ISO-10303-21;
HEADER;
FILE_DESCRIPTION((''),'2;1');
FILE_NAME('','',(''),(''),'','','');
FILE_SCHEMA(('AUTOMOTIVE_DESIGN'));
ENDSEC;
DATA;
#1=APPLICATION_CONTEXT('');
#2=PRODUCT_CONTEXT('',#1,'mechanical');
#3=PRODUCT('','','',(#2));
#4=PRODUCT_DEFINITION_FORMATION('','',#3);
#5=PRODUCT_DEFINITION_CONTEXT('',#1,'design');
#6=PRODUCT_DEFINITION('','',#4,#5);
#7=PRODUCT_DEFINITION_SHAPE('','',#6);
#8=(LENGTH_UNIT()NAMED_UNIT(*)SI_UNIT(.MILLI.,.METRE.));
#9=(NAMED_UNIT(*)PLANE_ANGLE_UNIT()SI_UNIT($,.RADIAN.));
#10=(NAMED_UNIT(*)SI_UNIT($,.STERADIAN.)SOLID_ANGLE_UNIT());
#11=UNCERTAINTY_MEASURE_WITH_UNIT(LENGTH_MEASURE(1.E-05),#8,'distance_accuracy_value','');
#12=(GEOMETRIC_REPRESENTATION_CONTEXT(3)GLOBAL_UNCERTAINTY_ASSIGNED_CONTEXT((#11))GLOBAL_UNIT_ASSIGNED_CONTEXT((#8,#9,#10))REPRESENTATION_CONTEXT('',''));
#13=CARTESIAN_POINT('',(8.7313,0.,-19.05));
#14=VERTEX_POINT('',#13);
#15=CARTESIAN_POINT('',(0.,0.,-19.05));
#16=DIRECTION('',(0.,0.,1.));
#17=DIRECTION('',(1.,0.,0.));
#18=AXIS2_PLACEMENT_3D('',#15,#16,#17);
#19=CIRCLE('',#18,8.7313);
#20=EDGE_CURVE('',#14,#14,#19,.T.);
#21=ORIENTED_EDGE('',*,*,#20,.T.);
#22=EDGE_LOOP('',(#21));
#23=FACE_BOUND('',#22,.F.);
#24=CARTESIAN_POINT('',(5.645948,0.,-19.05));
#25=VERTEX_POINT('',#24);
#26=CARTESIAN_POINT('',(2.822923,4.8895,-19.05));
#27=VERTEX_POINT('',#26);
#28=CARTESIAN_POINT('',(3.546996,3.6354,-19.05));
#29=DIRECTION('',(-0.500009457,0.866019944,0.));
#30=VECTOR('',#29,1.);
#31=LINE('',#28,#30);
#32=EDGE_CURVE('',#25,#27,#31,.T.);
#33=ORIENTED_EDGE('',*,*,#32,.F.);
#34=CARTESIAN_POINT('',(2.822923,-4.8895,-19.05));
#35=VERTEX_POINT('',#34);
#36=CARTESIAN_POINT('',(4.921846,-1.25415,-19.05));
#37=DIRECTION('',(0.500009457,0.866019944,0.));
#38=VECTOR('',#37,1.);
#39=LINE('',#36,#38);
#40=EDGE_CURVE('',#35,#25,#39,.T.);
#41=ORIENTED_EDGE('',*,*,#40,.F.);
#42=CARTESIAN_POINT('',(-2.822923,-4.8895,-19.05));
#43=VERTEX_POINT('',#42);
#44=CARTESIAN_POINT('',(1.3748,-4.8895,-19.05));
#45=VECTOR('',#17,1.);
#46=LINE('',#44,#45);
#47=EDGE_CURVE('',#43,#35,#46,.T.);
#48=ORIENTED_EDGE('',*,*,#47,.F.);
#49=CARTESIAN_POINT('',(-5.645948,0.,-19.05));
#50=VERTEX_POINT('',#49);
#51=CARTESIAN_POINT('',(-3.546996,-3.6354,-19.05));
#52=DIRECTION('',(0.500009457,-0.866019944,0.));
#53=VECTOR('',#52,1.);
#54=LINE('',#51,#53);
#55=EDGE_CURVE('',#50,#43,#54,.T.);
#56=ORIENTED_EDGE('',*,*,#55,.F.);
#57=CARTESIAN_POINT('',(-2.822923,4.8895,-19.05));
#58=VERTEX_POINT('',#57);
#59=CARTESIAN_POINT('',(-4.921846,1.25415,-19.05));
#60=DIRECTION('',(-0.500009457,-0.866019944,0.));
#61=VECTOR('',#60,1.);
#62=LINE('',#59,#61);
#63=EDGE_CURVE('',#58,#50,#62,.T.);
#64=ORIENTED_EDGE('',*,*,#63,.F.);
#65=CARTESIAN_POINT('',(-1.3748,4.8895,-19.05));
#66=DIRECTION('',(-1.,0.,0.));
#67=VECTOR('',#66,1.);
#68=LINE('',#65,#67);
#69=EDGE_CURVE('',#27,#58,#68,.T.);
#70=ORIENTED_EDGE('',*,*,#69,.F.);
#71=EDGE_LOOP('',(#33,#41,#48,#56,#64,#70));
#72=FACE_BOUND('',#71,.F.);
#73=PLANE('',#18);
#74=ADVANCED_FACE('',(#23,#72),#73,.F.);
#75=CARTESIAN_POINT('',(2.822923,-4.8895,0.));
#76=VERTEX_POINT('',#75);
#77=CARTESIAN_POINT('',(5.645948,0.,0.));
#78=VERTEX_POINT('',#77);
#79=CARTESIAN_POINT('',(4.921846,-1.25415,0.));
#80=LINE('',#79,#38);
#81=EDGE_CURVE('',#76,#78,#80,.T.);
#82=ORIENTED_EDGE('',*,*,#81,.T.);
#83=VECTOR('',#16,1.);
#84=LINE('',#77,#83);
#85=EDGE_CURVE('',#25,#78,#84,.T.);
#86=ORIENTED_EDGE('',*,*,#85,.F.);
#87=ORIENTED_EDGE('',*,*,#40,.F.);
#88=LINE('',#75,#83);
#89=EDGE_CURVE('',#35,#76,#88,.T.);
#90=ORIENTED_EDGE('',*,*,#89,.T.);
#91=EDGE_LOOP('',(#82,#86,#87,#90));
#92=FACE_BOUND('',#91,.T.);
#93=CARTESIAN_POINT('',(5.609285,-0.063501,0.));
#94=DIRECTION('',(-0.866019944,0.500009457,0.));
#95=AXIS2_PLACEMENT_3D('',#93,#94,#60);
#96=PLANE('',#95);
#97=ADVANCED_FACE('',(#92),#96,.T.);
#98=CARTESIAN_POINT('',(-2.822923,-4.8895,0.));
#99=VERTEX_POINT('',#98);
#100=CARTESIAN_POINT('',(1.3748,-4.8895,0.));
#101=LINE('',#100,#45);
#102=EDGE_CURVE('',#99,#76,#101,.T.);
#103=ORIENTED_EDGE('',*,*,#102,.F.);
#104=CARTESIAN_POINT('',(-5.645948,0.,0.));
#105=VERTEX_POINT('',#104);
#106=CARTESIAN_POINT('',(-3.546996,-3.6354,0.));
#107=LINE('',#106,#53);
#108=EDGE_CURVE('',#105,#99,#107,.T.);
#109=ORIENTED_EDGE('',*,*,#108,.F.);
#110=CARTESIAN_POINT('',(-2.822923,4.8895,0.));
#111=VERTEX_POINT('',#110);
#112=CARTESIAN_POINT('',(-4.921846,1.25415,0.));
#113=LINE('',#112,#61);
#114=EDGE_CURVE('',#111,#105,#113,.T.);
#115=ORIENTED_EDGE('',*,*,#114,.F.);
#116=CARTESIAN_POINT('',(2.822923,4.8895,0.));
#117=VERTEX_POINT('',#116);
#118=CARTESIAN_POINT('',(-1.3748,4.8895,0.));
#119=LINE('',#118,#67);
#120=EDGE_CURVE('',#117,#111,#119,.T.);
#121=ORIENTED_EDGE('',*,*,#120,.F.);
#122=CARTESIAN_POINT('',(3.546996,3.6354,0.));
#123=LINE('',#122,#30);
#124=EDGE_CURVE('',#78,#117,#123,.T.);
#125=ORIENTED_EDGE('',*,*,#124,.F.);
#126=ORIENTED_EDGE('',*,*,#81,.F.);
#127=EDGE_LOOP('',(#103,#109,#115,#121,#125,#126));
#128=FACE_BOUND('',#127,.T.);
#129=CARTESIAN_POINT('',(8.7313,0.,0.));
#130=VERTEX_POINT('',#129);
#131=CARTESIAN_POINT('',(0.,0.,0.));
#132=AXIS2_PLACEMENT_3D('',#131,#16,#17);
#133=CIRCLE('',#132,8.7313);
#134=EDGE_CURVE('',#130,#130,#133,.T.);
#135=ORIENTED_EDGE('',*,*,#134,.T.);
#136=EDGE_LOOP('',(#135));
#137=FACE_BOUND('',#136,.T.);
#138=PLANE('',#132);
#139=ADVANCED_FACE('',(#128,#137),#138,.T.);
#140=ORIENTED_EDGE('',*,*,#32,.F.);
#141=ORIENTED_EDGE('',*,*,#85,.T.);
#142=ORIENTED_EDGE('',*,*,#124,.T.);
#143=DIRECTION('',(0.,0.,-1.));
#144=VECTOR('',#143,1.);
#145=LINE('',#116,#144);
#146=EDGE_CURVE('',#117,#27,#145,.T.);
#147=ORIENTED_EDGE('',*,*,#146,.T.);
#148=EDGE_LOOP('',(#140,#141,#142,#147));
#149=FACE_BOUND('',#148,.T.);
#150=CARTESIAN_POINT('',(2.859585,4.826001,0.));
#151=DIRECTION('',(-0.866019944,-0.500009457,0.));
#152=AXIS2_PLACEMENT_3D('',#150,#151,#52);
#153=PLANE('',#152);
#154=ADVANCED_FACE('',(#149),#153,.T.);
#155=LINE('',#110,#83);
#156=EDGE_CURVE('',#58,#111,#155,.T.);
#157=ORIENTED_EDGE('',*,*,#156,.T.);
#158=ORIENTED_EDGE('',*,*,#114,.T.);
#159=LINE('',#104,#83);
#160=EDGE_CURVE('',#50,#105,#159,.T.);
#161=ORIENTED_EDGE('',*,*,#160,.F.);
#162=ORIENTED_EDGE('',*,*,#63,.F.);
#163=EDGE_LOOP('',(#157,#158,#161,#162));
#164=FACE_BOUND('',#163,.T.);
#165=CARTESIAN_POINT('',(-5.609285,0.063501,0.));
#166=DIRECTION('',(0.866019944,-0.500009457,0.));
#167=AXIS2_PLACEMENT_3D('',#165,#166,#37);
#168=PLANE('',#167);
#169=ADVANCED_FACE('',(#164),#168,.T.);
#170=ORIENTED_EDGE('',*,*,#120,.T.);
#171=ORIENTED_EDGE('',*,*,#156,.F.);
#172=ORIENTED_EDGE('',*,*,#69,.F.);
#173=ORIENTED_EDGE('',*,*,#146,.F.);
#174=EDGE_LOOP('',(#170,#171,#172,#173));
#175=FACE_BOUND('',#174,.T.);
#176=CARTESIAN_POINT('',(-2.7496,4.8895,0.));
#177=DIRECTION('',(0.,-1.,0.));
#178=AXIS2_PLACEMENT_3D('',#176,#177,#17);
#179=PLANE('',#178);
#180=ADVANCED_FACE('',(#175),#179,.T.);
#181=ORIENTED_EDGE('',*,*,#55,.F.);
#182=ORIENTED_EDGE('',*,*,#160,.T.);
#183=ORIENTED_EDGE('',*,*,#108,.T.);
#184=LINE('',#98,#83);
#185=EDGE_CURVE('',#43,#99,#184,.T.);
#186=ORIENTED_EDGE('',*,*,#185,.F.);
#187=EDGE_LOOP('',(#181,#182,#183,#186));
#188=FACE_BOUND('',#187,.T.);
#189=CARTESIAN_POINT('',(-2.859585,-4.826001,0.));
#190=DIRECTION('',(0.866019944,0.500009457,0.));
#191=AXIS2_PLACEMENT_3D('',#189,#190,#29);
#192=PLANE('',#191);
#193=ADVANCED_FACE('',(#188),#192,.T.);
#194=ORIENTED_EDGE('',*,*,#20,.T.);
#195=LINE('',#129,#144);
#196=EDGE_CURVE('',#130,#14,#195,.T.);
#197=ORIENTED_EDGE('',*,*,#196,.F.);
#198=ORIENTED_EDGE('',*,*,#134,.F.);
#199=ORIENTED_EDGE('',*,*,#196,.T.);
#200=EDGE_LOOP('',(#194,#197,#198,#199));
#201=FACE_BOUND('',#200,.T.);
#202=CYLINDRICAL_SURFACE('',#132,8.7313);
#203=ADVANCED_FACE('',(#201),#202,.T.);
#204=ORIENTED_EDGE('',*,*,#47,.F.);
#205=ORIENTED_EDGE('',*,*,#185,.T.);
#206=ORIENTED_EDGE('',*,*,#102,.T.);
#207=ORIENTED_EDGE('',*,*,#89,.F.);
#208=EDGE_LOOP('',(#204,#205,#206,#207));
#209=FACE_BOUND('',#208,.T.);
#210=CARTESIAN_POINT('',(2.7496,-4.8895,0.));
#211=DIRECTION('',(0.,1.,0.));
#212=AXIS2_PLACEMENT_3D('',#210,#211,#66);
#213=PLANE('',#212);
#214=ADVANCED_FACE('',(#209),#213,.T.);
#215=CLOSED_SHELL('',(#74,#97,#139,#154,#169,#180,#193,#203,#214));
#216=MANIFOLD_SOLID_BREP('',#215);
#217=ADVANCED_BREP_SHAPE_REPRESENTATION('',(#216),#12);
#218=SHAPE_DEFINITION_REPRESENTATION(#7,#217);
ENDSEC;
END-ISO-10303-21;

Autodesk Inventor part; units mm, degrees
ref_plane "YZ Plane" through (0, 0, 0) normal (1, 0, 0) x (0, 1, 0)
ref_plane "XZ Plane" through (0, 0, 0) normal (0, 1, 0) x (-1, 0, 0)
ref_plane "XY Plane" through (0, 0, 0) normal (0, 0, 1) x (1, 0, 0)
sketch "Sketch1" plane through (0, 0, 0) normal (0, 0, 1) x (1, 0, 0)
  line L0 (2.7496, 4.7625) -> (5.4993, 0)
  line L1 (5.4993, 0) -> (2.7496, -4.7625)
  line L2 (2.7496, -4.7625) -> (-2.7496, -4.7625)
  line L3 (-2.7496, -4.7625) -> (-5.4993, 0)
  line L4 (-5.4993, 0) -> (-2.7496, 4.7625)
  line L5 (-2.7496, 4.7625) -> (2.7496, 4.7625)
  circle A0 centre (0, 0) radius 8.7313
  circle A1 centre (0, 0) radius 5.4993 construction
  dimension "d0" = 9.525
  dimension "d2" = 17.4625
  dimension "d3" = 3.232
extrude "Extrusion1" add sketch "Sketch1" against normal blind 19.05
thicken "Thicken Hex" operation add thickness 0.127 both sides no extend neighbours yes toward (-0.8660254, 0.5, 0) faces at (-4.5827, 1.5875, -6.35) (-3.6662, -3.175, -6.35) (0.9165, -4.7625, -6.35) (-0.9165, 4.7625, -6.35) (3.6662, 3.175, -6.35) (4.5827, -1.5875, -6.35)
equation "\"d0\" = hexSize"
equation "\"d2\" = exteriorDiameter"
equation "\"d4\" = length"
equation "\"d6\" = printSpacing"
equation "\"d7\" = printSpacing"
equation "\"hexSize\" = 9.525"
equation "\"exteriorDiameter\" = 17.4625"
equation "\"length\" = 19.05"
equation "\"printSpacing\" = 0.127"
properties part number "3_8x11_16x3_4-hexBearing" material "PC/ABS Plastic"
